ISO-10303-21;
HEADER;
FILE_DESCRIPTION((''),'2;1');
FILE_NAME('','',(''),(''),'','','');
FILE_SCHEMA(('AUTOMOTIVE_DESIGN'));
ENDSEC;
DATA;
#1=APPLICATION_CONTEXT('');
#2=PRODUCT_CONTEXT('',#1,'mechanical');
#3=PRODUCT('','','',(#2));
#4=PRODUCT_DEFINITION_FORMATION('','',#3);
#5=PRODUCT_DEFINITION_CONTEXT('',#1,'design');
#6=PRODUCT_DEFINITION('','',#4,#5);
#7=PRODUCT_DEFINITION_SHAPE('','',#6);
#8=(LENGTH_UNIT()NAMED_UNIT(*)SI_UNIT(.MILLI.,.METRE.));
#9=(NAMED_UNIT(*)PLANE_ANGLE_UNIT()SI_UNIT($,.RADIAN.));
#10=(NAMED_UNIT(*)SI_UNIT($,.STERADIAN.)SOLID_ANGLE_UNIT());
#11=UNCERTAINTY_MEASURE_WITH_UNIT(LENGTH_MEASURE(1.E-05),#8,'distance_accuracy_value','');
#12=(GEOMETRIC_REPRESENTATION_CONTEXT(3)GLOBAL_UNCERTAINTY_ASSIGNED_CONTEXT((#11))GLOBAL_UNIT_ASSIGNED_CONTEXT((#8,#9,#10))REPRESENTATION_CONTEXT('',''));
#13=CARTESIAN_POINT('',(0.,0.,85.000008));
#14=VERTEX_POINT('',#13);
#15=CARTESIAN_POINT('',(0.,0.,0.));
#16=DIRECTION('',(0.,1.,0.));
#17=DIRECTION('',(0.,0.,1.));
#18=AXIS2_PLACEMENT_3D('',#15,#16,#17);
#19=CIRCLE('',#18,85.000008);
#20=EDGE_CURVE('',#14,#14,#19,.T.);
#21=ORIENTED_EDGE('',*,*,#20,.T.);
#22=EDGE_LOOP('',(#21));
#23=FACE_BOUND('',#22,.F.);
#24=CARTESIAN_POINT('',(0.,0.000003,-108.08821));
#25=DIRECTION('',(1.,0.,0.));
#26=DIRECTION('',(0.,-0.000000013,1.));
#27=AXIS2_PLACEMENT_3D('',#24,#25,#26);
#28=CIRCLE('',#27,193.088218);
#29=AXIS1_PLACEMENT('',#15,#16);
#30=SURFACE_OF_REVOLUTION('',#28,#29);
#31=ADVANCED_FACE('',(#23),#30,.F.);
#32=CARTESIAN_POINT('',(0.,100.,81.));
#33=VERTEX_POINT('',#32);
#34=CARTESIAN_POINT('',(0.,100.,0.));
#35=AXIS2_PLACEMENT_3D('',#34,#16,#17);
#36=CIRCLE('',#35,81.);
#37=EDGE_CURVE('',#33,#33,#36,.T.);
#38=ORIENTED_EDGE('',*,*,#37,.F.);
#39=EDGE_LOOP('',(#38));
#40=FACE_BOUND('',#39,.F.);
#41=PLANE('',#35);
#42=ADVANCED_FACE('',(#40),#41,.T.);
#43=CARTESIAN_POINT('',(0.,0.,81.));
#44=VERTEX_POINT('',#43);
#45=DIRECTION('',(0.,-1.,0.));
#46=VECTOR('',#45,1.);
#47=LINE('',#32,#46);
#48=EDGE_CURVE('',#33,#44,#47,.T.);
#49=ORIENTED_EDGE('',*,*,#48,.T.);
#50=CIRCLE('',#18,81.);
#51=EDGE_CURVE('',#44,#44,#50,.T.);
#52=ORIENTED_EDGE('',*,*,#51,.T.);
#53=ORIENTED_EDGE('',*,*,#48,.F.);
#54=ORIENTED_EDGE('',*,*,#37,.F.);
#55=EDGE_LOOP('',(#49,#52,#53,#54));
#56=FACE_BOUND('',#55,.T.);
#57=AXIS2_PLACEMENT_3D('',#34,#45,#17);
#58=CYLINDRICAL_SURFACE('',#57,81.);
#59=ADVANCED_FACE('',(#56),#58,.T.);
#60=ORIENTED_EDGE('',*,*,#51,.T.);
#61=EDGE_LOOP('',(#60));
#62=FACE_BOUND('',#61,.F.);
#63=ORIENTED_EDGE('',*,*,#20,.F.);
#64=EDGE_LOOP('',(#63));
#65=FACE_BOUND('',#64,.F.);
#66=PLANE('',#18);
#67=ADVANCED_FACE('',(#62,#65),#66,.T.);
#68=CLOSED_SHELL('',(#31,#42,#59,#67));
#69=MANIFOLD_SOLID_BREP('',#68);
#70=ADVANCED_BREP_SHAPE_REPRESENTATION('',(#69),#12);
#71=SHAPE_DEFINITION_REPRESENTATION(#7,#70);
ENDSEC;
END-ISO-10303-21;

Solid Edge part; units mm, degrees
sketch "Sketch1" plane through (0, 0, 0) normal (1, 0, 0) x (0, 1, 0)
  line L0 (0, 81) -> (0, 85)
  arc A0 (0, 85) -> (-160, 0) centre (0, -108.0882) ccw
  line L1 (-160, 0) -> (0, 0)
  line L2 (0, 0) -> (100, 0)
  line L3 (100, 0) -> (100, 81)
  line L4 (100, 81) -> (0, 81)
revolve "RevolvedProtrusion1" add sketch "Sketch1" angle 360 about axis through (0, 0, 0) along (0, 1, 0)
